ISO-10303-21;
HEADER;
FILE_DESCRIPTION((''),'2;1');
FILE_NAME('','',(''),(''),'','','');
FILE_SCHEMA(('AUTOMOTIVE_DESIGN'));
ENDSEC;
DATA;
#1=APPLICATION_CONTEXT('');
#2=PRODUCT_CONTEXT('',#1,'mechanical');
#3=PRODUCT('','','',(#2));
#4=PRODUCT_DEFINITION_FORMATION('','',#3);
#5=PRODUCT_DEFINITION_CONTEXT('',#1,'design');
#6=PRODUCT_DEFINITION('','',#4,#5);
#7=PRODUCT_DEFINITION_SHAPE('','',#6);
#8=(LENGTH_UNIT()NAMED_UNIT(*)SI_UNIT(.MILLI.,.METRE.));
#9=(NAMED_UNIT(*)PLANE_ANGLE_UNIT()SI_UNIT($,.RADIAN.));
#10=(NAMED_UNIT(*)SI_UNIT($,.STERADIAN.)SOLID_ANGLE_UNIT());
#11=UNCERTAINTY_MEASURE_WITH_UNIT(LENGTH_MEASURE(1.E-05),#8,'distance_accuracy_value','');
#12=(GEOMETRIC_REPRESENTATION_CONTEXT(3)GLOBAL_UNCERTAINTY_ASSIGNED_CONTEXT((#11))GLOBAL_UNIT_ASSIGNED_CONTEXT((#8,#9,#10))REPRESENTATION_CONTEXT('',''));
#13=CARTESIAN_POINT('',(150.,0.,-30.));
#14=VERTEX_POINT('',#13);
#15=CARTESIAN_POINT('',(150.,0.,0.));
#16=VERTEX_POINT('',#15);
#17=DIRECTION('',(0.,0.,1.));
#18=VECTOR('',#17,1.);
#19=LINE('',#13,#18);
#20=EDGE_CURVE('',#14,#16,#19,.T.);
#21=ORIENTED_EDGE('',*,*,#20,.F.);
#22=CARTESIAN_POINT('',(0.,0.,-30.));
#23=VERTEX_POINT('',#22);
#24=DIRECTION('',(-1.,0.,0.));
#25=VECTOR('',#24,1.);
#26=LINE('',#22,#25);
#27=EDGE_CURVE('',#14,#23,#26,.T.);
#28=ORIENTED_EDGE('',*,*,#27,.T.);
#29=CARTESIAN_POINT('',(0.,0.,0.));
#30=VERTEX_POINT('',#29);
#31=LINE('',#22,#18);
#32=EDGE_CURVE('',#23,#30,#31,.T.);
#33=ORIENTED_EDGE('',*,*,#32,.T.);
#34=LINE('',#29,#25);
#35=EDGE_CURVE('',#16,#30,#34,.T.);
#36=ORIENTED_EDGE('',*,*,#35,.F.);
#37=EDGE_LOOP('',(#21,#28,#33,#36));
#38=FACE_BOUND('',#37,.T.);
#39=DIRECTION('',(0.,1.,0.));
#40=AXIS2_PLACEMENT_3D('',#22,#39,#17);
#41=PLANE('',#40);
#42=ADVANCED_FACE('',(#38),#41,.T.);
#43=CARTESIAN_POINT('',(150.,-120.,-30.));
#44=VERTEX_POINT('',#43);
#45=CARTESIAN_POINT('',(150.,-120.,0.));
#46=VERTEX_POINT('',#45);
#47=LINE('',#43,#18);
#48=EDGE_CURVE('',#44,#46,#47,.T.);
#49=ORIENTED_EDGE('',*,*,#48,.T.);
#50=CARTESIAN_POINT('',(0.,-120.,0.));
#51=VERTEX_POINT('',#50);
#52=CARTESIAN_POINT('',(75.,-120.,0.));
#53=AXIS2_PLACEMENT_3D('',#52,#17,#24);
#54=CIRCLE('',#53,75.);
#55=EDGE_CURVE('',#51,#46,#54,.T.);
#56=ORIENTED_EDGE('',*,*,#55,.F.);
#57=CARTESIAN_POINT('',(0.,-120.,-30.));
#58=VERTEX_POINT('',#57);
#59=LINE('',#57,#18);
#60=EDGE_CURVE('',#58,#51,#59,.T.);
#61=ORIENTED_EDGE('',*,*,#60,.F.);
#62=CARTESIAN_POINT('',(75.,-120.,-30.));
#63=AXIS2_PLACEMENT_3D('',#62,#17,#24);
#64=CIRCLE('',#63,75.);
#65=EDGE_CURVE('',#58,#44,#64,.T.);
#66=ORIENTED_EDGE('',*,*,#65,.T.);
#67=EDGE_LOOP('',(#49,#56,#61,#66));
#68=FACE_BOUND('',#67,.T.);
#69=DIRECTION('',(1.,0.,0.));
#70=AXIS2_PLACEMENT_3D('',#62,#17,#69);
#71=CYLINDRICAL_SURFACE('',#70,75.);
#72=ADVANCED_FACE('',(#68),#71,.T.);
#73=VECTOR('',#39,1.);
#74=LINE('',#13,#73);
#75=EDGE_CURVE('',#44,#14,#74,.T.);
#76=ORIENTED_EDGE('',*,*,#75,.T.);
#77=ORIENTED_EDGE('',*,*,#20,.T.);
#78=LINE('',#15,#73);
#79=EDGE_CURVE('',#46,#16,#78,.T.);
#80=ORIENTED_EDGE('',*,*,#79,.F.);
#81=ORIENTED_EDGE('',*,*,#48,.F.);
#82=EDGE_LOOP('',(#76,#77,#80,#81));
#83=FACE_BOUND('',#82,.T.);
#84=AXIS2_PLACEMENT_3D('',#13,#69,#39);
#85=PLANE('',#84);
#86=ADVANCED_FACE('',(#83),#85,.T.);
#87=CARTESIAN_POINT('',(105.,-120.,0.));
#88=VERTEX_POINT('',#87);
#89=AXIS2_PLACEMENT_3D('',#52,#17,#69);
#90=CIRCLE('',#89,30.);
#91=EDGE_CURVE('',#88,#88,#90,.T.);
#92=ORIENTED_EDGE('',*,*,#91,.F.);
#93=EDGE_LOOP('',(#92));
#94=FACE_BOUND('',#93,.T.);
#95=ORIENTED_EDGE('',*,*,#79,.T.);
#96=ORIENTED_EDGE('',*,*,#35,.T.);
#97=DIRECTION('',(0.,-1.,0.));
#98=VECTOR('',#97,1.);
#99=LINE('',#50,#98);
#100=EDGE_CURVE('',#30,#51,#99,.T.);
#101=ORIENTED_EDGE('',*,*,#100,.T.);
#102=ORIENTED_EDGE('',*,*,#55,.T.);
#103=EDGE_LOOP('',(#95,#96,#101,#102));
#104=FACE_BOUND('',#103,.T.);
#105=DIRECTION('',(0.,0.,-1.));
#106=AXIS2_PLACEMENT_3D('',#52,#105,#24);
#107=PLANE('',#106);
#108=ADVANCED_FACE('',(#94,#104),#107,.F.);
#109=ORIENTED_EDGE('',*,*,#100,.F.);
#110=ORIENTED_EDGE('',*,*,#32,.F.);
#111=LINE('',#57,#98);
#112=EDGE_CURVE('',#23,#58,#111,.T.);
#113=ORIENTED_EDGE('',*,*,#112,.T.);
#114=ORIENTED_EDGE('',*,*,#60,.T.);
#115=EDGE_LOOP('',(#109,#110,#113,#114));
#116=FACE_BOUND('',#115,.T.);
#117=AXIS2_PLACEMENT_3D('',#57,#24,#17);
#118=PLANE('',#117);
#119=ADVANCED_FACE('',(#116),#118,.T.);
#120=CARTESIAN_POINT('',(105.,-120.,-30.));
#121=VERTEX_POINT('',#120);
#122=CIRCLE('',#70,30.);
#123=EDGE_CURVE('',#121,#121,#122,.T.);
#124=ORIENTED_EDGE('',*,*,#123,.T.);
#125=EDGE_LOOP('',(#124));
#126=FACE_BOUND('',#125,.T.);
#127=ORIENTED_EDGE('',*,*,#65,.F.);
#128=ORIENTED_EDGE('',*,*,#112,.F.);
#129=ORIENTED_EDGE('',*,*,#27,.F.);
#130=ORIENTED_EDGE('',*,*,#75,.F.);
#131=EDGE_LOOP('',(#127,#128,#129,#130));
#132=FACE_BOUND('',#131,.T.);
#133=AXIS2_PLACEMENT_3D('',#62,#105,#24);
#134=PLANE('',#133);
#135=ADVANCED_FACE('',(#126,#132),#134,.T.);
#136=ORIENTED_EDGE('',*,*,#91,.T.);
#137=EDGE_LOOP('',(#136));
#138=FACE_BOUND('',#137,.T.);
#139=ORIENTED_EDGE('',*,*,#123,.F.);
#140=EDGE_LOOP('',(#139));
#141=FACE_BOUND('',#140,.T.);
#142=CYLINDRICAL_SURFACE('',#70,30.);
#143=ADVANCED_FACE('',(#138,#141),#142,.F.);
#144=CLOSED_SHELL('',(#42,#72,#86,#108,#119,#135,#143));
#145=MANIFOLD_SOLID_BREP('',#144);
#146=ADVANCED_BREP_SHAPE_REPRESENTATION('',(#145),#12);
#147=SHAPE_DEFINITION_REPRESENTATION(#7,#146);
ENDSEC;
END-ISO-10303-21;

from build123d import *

# Parameters (mm, degrees)
SKETCH_1_R             = 30
SM_BASE_FLANGE_1_DEPTH = 30


# Sheet-metal steps are written as plain solids
with BuildPart() as part:
    # Sketch 1 → 基体-法兰1 (new body)
    with BuildSketch(Plane.XY):
        with BuildLine():
            Line((0, 0), (150, 0))
            Line((150, 0), (150, -120))
            ThreePointArc((150, -120), (75, -195), (0, -120))
            Line((0, -120), (0, 0))
        make_face()
        with Locations((75, -120)):
            Circle(SKETCH_1_R, mode=Mode.SUBTRACT)
    extrude(amount=-SM_BASE_FLANGE_1_DEPTH)


solid = part.part
